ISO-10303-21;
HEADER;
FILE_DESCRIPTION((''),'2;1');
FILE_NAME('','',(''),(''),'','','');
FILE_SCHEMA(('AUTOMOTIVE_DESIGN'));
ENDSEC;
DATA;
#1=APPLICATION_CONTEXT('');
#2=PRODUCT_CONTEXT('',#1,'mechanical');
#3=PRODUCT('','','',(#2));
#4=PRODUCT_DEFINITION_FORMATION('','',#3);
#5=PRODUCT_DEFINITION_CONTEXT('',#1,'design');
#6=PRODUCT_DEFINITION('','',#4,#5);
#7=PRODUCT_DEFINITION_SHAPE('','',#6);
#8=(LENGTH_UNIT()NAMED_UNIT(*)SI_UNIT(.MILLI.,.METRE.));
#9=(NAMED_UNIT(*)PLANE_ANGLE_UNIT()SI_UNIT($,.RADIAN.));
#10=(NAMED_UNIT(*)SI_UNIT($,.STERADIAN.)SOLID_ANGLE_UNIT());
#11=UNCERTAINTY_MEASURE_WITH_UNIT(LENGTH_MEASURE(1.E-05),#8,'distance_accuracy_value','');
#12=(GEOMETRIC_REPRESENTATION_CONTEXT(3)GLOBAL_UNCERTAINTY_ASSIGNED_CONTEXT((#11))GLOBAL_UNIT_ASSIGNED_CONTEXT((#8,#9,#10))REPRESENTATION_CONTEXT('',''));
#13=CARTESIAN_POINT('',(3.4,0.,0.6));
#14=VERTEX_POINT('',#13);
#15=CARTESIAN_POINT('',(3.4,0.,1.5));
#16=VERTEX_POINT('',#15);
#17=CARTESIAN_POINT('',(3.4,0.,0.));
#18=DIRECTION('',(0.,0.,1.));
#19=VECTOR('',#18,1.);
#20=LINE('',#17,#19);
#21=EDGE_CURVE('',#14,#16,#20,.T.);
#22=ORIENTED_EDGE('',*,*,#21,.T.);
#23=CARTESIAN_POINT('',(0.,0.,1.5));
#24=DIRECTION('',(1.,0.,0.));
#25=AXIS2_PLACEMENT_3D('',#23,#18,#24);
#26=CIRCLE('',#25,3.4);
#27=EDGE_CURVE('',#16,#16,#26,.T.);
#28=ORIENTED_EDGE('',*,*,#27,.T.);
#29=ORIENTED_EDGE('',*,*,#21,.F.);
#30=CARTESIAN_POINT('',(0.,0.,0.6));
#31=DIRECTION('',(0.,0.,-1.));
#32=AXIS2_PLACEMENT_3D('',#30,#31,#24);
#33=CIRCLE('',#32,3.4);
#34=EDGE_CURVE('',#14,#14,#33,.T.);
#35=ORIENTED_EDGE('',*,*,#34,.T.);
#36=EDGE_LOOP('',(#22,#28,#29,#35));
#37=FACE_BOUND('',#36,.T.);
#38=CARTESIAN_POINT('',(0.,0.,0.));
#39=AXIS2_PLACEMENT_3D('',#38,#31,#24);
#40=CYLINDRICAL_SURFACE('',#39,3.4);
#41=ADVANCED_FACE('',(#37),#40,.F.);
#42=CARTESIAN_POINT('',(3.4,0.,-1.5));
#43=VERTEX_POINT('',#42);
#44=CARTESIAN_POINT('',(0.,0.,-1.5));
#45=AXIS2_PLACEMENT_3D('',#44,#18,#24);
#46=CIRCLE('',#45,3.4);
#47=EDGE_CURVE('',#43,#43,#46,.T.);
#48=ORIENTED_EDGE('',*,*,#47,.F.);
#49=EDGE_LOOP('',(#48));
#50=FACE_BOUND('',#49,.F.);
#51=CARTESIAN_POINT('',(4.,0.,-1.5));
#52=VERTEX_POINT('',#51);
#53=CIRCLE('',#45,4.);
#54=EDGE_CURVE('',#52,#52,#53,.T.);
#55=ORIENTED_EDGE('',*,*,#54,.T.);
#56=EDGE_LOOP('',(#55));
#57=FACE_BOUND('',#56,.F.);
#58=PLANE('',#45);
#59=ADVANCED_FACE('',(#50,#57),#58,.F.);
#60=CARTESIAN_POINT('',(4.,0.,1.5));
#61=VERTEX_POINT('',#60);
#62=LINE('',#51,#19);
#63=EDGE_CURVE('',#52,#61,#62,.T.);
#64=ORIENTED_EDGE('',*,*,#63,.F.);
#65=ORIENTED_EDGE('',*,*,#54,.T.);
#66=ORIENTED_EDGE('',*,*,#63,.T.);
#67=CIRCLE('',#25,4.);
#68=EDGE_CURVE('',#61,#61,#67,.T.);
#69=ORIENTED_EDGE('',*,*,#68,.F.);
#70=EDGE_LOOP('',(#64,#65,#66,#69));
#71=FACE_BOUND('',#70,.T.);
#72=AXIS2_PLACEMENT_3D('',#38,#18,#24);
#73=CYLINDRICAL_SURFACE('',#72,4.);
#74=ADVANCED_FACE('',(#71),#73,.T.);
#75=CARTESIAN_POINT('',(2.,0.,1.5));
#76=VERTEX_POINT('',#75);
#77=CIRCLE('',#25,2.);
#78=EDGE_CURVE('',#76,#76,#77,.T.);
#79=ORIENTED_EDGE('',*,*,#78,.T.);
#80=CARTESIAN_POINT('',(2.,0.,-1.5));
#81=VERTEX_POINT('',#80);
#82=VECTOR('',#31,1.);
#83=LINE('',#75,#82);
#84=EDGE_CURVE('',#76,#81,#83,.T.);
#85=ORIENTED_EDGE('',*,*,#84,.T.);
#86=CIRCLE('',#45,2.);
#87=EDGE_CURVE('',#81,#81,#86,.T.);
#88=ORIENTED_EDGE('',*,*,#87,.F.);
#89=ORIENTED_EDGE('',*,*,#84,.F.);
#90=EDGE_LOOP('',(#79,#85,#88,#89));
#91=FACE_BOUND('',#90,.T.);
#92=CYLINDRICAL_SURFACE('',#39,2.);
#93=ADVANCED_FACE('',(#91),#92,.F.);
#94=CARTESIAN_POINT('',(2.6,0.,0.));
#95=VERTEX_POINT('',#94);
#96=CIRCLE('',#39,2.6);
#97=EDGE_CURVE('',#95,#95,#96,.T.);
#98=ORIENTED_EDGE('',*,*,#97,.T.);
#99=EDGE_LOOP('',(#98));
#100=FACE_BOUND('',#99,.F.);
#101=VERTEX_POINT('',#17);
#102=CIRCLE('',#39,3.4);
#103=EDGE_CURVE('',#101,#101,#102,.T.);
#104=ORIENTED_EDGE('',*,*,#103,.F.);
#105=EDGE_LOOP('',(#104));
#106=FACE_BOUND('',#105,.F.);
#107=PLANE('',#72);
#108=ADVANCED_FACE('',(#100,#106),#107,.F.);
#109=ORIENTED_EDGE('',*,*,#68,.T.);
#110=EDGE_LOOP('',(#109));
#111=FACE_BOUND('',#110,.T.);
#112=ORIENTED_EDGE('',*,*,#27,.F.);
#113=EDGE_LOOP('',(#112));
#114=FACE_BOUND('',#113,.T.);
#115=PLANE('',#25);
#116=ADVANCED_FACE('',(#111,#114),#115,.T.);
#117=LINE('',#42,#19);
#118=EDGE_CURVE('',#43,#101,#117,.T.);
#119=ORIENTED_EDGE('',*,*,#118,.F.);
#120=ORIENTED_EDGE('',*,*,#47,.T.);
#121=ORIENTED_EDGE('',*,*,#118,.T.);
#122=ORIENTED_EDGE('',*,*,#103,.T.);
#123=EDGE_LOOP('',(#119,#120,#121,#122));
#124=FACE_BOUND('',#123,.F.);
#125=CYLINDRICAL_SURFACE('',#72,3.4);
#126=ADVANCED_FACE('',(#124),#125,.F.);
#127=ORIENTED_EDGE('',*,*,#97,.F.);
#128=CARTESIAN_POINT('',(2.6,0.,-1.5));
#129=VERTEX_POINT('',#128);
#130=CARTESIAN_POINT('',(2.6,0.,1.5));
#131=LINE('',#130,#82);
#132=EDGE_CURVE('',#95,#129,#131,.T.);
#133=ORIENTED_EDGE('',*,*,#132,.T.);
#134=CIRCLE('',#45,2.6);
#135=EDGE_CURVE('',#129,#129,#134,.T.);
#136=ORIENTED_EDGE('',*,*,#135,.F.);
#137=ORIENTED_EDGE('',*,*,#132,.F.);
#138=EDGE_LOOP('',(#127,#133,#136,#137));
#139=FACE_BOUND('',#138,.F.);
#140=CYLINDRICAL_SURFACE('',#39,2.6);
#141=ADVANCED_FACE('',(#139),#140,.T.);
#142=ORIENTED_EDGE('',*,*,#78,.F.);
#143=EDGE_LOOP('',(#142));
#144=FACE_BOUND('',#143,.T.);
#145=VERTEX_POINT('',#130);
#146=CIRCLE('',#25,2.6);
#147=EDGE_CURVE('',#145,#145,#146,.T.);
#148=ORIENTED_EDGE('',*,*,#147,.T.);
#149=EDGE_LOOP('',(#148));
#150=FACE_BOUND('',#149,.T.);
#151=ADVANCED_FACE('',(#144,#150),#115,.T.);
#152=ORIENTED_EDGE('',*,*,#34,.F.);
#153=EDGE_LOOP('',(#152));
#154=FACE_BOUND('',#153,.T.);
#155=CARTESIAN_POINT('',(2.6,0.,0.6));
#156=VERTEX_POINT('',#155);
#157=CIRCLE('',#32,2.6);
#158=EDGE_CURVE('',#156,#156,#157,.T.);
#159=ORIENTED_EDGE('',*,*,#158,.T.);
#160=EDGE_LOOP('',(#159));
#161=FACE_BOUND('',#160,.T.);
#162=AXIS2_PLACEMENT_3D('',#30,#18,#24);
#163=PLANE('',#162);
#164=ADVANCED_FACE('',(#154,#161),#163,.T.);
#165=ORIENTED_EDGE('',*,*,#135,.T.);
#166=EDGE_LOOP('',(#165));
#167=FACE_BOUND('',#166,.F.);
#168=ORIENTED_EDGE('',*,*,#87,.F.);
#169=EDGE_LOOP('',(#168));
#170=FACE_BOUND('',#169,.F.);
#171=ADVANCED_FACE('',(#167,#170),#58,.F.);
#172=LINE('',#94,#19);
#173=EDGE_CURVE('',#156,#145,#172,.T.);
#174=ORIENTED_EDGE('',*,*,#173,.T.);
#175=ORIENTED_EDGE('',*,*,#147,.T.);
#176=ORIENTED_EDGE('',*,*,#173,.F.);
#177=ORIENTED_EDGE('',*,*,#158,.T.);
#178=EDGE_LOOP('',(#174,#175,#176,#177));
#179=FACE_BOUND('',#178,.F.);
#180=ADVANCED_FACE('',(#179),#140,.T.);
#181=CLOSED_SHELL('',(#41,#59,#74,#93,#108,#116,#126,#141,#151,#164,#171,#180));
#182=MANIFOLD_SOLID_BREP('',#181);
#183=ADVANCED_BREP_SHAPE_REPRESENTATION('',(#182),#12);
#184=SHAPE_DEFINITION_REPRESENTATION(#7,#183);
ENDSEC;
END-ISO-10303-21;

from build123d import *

# Parameters (mm, degrees)
F0_R     = 4
F0_R_2   = 2
F1_DEPTH = 1.5
F2_T     = -0.6
F3_DEPTH = 1.5
F4_T     = 0.6


# Not quite as in the source:
# - a shell that OpenCascade refuses in one call is made with other operations: the cavity is built on its own and cut out


with BuildPart() as f1:
    # F0 (on Top) → F1 (new body)
    with BuildSketch(Plane.XY):
        Circle(F0_R)
        Circle(F0_R_2, mode=Mode.SUBTRACT)
    extrude(amount=F1_DEPTH)

    # F2
    f2_openings = [f1.faces().sort_by_distance(p)[0] for p in [
        (-3.886863, 0, 1.5),
    ]]
    offset(amount=F2_T, openings=f2_openings)

    # F3 (add): a face of the model
    f3_faces = [f1.faces().sort_by_distance(p)[0] for p in [
        (-3.886862915, 0, 0),
    ]]
    extrude(f3_faces, amount=F3_DEPTH)

    # F4: shell of thickness 0.6, made by hand


with BuildPart() as f4_core1:
    # F4_t2: copy of F1
    add(f1.part)

    # the walls: a layer under each face that stays
    f4_faces = [f4_core1.faces().sort_by_distance(p)[0] for p in [
        (-4, 0, 0.75),
        (-4, 0, -0.75),
        (-2.6666666667, -2.6666666667, 1.5),
        (-3.4, 0, 1.05),
        (-2, 0, -0.75),
        (-2.2666666667, -2.2666666667, 0.6),
        (-2, 0, 0.75),
        (-2.6, 0, 1.05),
        (-1.7333333333, -1.7333333333, 1.5),
    ]]
    thicken(f4_faces, amount=-F4_T, mode=Mode.SUBTRACT)

    # F4_s3 → F4_t4 (revolve, cut)
    with BuildSketch(Plane.XZ):
        Polygon((3.394, 0.606), (4, 0.6), (4, 0), (3.4, 0), align=None)
    revolve(axis=Axis((0, 0, 0.6), (0, 0, -1)), mode=Mode.SUBTRACT)

    # F4_s5 → F4_t6 (revolve, cut)
    with BuildSketch(Plane.XZ):
        Polygon((2.606, 0.606), (2.6, 0), (2, 0), (2, 0.6), align=None)
    revolve(axis=Axis((0, 0, 0.6), (0, 0, -1)), mode=Mode.SUBTRACT)


with BuildPart() as f1_1:
    add(f1.part)

    # what is left inside the walls is the cavity
    f4_cavity = [f4_core1.part.solids().sort_by_distance(p)[0] for p in [
        (-3.394, 0, -1),
    ]]
    add(f4_cavity, mode=Mode.SUBTRACT)


solid = f1_1.part
